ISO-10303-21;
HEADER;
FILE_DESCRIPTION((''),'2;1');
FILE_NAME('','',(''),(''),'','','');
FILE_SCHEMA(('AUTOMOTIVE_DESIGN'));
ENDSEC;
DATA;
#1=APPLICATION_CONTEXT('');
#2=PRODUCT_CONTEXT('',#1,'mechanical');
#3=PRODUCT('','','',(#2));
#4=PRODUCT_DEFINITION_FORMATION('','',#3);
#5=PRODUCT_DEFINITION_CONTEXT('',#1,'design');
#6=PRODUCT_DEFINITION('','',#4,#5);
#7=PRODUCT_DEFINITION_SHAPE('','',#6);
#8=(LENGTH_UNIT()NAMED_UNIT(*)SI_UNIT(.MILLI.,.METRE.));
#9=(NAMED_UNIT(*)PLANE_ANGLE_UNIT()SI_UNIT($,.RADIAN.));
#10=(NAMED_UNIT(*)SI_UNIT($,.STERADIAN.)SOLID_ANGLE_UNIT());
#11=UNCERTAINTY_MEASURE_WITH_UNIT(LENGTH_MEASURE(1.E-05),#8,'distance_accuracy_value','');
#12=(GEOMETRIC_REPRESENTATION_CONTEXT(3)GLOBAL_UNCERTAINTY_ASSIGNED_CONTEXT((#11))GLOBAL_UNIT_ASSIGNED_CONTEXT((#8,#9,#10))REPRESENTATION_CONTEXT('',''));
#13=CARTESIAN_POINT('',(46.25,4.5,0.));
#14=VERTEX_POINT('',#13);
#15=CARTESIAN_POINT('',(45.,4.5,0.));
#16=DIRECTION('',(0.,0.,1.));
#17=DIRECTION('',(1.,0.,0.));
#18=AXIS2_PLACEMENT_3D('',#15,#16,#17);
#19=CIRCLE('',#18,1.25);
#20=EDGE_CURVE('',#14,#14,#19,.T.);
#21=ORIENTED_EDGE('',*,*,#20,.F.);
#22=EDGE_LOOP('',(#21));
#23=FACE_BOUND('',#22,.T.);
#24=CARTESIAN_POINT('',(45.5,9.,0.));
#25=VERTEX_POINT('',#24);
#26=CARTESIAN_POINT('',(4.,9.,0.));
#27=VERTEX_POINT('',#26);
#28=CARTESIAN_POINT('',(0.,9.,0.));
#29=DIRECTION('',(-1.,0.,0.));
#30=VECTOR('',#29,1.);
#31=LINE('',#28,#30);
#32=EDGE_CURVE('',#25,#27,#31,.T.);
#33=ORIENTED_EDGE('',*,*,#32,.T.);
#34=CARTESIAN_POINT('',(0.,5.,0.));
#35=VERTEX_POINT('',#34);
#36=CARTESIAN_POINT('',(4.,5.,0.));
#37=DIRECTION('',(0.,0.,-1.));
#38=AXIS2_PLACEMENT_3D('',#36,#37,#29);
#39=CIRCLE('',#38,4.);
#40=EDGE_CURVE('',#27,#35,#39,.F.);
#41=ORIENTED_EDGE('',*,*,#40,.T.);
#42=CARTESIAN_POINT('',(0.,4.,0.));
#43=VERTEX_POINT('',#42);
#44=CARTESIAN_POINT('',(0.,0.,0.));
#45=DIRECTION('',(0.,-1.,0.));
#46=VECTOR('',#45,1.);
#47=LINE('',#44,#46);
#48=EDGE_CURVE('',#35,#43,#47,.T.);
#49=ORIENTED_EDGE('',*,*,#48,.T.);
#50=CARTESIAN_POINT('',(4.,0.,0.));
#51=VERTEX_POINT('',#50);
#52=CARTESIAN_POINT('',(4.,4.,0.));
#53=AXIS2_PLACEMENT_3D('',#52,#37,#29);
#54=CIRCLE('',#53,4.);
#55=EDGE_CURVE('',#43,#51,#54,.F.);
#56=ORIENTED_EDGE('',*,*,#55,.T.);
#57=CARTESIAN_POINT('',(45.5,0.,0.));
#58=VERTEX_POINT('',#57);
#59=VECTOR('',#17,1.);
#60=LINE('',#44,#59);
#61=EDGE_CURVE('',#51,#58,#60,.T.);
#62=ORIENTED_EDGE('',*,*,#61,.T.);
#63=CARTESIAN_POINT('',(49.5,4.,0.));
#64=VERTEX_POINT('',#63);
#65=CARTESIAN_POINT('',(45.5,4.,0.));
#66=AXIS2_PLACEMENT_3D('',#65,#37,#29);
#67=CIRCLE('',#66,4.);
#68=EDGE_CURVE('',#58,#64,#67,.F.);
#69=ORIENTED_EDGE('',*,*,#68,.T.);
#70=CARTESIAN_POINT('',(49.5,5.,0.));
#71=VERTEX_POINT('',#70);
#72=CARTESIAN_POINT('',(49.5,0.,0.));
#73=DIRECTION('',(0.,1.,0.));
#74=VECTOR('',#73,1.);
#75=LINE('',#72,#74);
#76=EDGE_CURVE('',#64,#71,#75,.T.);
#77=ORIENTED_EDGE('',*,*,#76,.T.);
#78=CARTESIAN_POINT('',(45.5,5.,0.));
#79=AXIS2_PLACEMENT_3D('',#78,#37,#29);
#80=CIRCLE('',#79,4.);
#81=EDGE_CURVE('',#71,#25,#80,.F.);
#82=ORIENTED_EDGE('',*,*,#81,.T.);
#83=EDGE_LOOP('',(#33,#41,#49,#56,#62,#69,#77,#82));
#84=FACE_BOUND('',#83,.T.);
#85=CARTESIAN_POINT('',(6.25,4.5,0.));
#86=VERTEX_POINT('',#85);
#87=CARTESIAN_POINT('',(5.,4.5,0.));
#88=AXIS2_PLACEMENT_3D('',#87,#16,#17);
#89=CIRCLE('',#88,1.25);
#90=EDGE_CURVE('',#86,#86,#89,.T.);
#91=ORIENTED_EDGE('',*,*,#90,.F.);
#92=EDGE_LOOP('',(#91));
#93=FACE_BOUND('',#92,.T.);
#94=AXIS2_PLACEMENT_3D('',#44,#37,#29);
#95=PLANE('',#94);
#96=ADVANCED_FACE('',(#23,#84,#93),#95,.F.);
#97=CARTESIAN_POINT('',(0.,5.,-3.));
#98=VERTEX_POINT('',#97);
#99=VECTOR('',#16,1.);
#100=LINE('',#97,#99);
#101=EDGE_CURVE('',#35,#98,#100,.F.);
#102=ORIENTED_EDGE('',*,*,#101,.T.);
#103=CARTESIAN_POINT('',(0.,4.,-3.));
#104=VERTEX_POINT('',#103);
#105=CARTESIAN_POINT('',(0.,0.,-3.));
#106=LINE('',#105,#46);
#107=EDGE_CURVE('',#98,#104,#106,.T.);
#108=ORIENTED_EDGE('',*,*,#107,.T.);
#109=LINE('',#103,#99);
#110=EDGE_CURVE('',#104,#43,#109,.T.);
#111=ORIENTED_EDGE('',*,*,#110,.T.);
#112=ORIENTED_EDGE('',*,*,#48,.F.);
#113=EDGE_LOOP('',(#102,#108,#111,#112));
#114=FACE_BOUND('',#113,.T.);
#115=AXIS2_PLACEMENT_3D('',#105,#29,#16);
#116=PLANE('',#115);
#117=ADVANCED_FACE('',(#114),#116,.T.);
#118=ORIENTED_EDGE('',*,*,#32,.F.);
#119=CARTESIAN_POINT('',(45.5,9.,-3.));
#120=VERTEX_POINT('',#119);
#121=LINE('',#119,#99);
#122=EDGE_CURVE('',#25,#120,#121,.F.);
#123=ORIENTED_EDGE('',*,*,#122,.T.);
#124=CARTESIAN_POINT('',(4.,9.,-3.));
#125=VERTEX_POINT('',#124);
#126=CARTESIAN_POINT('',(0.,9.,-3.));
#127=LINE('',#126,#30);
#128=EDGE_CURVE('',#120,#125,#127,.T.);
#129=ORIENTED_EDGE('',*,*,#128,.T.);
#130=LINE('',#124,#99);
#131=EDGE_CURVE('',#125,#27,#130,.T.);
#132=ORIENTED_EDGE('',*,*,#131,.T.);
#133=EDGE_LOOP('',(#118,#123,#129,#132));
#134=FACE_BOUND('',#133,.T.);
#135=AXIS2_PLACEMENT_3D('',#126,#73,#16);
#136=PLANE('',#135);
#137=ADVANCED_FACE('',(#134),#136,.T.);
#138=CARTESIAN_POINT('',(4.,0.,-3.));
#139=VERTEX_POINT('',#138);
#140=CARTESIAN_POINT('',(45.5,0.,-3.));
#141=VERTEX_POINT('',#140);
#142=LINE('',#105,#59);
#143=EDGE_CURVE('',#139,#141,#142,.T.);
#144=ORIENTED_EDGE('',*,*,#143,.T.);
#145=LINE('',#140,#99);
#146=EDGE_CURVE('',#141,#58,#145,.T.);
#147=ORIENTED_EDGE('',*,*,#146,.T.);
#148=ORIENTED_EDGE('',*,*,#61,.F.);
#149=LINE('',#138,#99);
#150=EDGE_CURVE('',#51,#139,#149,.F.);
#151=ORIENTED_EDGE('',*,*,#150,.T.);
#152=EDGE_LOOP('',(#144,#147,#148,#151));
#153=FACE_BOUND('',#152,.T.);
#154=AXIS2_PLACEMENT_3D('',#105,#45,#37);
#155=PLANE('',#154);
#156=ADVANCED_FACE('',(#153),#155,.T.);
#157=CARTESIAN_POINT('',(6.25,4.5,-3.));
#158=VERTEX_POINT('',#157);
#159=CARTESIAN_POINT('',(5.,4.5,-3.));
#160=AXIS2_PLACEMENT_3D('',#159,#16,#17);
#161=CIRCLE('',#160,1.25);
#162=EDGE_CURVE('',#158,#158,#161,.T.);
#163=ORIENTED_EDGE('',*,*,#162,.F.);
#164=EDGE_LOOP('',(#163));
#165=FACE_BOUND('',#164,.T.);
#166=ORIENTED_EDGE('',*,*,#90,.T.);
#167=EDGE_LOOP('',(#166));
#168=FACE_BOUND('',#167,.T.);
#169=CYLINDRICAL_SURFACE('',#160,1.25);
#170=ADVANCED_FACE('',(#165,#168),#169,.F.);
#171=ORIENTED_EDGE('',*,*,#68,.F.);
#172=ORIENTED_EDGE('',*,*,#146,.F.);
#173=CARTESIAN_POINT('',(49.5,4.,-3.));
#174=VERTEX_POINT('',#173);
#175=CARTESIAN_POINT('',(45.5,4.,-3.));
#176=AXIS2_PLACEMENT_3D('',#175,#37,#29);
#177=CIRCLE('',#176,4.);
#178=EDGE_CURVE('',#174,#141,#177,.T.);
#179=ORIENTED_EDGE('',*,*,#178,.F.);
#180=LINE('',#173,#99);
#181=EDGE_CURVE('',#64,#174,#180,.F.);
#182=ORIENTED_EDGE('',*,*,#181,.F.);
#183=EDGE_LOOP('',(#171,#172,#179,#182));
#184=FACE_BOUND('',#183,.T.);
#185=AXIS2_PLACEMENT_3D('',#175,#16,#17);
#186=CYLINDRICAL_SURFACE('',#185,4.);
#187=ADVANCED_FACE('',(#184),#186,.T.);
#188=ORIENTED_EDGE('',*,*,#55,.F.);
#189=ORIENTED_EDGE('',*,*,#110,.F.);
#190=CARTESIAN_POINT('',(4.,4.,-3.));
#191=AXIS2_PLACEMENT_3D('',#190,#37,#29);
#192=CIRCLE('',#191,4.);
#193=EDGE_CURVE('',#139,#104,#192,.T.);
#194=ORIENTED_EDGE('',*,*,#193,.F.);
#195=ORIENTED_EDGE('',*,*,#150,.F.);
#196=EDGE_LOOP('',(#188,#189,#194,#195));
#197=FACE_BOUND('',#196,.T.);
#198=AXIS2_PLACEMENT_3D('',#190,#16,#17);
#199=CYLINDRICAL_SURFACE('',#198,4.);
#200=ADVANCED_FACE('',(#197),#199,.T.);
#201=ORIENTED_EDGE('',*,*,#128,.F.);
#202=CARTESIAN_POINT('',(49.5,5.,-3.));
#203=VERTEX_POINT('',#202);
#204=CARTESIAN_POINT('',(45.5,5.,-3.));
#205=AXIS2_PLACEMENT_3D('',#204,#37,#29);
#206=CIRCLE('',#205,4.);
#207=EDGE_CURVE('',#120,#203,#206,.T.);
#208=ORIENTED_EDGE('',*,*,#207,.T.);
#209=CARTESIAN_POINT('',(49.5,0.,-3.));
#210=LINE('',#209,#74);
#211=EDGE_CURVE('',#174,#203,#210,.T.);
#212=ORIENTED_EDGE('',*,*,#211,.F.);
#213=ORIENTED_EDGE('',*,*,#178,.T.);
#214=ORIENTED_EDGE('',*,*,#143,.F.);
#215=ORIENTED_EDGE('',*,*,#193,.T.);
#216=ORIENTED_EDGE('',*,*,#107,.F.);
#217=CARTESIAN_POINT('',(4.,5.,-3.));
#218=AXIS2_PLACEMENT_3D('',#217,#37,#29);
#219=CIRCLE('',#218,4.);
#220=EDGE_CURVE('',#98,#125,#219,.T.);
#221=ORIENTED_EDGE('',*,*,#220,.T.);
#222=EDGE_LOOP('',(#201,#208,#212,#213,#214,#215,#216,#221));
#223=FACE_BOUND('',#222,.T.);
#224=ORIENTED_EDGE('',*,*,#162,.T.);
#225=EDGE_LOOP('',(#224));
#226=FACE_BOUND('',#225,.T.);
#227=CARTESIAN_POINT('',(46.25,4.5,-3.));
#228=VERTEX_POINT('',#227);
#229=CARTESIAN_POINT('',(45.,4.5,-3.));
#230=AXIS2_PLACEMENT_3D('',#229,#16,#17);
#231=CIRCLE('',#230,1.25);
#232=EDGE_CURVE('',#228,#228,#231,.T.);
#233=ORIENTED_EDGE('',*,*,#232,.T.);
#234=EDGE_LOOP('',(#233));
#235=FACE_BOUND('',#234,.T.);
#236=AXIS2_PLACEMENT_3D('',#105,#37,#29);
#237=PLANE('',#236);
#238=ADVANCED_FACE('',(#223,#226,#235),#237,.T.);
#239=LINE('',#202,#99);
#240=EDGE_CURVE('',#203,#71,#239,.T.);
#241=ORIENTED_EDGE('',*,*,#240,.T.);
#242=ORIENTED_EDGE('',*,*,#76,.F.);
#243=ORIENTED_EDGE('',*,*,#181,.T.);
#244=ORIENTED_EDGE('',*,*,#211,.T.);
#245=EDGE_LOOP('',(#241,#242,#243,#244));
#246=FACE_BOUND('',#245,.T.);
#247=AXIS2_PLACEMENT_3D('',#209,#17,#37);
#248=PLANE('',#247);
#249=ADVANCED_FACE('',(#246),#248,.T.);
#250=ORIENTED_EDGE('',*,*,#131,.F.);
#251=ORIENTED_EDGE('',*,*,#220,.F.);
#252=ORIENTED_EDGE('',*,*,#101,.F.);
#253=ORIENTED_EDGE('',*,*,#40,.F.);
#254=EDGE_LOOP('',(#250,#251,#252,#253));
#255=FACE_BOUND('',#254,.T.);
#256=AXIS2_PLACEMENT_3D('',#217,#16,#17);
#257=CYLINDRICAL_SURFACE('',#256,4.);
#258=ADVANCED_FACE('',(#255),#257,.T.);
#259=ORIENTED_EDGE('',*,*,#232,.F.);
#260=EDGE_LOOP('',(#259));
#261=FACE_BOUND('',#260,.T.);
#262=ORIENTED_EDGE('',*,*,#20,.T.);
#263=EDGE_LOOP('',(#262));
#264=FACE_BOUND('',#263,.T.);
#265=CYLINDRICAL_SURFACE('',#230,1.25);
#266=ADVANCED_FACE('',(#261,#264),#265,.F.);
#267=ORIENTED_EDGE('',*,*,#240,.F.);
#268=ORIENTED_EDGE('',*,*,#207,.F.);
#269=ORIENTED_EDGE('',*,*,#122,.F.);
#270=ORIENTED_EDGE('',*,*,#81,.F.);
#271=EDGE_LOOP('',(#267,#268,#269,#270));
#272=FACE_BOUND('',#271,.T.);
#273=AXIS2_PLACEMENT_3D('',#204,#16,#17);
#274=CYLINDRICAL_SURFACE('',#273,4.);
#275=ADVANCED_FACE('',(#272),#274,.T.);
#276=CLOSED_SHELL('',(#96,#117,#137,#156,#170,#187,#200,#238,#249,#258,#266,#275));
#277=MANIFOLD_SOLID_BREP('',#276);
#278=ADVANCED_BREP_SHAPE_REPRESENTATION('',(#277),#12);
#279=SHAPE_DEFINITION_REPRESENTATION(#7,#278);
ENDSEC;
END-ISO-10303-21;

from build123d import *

# Parameters (mm, degrees)
CROQUIS1_W                = 49.5
CROQUIS1_H                = 9
CROQUIS1_R                = 1.25
BRIDA_BASE1_DEPTH         = 3
TALADRO_ROSCADO_M31_D     = 2.5
TALADRO_ROSCADO_M31_DEPTH = 3
REDONDEO1_R               = 4


# Sheet-metal steps are written as plain solids
with BuildPart() as part:
    # Croquis1 → Brida base1 (new body)
    with BuildSketch(Plane.XY):
        with Locations((24.75, 4.5)):
            Rectangle(CROQUIS1_W, CROQUIS1_H)
        with Locations((5, 4.5)):
            Circle(CROQUIS1_R, mode=Mode.SUBTRACT)
        with Locations((45, 4.5)):
            Circle(CROQUIS1_R, mode=Mode.SUBTRACT)
    extrude(amount=-BRIDA_BASE1_DEPTH)

    # Taladro roscado M31
    with Locations(Plane(origin=(5, 4.5, 0), x_dir=(1, 0, 0), z_dir=(0, 0, 1))):
        with Locations((0, 0), (40, 0)):
            Hole(TALADRO_ROSCADO_M31_D / 2, depth=TALADRO_ROSCADO_M31_DEPTH)

    # Redondeo1
    redondeo1_edges = [part.edges().sort_by_distance(p)[0] for p in [
        (0, 9, -1.5),
        (49.5, 9, -1.5),
        (49.5, 0, -1.5),
        (0, 0, -1.5),
    ]]
    fillet(redondeo1_edges, radius=REDONDEO1_R)


solid = part.part
